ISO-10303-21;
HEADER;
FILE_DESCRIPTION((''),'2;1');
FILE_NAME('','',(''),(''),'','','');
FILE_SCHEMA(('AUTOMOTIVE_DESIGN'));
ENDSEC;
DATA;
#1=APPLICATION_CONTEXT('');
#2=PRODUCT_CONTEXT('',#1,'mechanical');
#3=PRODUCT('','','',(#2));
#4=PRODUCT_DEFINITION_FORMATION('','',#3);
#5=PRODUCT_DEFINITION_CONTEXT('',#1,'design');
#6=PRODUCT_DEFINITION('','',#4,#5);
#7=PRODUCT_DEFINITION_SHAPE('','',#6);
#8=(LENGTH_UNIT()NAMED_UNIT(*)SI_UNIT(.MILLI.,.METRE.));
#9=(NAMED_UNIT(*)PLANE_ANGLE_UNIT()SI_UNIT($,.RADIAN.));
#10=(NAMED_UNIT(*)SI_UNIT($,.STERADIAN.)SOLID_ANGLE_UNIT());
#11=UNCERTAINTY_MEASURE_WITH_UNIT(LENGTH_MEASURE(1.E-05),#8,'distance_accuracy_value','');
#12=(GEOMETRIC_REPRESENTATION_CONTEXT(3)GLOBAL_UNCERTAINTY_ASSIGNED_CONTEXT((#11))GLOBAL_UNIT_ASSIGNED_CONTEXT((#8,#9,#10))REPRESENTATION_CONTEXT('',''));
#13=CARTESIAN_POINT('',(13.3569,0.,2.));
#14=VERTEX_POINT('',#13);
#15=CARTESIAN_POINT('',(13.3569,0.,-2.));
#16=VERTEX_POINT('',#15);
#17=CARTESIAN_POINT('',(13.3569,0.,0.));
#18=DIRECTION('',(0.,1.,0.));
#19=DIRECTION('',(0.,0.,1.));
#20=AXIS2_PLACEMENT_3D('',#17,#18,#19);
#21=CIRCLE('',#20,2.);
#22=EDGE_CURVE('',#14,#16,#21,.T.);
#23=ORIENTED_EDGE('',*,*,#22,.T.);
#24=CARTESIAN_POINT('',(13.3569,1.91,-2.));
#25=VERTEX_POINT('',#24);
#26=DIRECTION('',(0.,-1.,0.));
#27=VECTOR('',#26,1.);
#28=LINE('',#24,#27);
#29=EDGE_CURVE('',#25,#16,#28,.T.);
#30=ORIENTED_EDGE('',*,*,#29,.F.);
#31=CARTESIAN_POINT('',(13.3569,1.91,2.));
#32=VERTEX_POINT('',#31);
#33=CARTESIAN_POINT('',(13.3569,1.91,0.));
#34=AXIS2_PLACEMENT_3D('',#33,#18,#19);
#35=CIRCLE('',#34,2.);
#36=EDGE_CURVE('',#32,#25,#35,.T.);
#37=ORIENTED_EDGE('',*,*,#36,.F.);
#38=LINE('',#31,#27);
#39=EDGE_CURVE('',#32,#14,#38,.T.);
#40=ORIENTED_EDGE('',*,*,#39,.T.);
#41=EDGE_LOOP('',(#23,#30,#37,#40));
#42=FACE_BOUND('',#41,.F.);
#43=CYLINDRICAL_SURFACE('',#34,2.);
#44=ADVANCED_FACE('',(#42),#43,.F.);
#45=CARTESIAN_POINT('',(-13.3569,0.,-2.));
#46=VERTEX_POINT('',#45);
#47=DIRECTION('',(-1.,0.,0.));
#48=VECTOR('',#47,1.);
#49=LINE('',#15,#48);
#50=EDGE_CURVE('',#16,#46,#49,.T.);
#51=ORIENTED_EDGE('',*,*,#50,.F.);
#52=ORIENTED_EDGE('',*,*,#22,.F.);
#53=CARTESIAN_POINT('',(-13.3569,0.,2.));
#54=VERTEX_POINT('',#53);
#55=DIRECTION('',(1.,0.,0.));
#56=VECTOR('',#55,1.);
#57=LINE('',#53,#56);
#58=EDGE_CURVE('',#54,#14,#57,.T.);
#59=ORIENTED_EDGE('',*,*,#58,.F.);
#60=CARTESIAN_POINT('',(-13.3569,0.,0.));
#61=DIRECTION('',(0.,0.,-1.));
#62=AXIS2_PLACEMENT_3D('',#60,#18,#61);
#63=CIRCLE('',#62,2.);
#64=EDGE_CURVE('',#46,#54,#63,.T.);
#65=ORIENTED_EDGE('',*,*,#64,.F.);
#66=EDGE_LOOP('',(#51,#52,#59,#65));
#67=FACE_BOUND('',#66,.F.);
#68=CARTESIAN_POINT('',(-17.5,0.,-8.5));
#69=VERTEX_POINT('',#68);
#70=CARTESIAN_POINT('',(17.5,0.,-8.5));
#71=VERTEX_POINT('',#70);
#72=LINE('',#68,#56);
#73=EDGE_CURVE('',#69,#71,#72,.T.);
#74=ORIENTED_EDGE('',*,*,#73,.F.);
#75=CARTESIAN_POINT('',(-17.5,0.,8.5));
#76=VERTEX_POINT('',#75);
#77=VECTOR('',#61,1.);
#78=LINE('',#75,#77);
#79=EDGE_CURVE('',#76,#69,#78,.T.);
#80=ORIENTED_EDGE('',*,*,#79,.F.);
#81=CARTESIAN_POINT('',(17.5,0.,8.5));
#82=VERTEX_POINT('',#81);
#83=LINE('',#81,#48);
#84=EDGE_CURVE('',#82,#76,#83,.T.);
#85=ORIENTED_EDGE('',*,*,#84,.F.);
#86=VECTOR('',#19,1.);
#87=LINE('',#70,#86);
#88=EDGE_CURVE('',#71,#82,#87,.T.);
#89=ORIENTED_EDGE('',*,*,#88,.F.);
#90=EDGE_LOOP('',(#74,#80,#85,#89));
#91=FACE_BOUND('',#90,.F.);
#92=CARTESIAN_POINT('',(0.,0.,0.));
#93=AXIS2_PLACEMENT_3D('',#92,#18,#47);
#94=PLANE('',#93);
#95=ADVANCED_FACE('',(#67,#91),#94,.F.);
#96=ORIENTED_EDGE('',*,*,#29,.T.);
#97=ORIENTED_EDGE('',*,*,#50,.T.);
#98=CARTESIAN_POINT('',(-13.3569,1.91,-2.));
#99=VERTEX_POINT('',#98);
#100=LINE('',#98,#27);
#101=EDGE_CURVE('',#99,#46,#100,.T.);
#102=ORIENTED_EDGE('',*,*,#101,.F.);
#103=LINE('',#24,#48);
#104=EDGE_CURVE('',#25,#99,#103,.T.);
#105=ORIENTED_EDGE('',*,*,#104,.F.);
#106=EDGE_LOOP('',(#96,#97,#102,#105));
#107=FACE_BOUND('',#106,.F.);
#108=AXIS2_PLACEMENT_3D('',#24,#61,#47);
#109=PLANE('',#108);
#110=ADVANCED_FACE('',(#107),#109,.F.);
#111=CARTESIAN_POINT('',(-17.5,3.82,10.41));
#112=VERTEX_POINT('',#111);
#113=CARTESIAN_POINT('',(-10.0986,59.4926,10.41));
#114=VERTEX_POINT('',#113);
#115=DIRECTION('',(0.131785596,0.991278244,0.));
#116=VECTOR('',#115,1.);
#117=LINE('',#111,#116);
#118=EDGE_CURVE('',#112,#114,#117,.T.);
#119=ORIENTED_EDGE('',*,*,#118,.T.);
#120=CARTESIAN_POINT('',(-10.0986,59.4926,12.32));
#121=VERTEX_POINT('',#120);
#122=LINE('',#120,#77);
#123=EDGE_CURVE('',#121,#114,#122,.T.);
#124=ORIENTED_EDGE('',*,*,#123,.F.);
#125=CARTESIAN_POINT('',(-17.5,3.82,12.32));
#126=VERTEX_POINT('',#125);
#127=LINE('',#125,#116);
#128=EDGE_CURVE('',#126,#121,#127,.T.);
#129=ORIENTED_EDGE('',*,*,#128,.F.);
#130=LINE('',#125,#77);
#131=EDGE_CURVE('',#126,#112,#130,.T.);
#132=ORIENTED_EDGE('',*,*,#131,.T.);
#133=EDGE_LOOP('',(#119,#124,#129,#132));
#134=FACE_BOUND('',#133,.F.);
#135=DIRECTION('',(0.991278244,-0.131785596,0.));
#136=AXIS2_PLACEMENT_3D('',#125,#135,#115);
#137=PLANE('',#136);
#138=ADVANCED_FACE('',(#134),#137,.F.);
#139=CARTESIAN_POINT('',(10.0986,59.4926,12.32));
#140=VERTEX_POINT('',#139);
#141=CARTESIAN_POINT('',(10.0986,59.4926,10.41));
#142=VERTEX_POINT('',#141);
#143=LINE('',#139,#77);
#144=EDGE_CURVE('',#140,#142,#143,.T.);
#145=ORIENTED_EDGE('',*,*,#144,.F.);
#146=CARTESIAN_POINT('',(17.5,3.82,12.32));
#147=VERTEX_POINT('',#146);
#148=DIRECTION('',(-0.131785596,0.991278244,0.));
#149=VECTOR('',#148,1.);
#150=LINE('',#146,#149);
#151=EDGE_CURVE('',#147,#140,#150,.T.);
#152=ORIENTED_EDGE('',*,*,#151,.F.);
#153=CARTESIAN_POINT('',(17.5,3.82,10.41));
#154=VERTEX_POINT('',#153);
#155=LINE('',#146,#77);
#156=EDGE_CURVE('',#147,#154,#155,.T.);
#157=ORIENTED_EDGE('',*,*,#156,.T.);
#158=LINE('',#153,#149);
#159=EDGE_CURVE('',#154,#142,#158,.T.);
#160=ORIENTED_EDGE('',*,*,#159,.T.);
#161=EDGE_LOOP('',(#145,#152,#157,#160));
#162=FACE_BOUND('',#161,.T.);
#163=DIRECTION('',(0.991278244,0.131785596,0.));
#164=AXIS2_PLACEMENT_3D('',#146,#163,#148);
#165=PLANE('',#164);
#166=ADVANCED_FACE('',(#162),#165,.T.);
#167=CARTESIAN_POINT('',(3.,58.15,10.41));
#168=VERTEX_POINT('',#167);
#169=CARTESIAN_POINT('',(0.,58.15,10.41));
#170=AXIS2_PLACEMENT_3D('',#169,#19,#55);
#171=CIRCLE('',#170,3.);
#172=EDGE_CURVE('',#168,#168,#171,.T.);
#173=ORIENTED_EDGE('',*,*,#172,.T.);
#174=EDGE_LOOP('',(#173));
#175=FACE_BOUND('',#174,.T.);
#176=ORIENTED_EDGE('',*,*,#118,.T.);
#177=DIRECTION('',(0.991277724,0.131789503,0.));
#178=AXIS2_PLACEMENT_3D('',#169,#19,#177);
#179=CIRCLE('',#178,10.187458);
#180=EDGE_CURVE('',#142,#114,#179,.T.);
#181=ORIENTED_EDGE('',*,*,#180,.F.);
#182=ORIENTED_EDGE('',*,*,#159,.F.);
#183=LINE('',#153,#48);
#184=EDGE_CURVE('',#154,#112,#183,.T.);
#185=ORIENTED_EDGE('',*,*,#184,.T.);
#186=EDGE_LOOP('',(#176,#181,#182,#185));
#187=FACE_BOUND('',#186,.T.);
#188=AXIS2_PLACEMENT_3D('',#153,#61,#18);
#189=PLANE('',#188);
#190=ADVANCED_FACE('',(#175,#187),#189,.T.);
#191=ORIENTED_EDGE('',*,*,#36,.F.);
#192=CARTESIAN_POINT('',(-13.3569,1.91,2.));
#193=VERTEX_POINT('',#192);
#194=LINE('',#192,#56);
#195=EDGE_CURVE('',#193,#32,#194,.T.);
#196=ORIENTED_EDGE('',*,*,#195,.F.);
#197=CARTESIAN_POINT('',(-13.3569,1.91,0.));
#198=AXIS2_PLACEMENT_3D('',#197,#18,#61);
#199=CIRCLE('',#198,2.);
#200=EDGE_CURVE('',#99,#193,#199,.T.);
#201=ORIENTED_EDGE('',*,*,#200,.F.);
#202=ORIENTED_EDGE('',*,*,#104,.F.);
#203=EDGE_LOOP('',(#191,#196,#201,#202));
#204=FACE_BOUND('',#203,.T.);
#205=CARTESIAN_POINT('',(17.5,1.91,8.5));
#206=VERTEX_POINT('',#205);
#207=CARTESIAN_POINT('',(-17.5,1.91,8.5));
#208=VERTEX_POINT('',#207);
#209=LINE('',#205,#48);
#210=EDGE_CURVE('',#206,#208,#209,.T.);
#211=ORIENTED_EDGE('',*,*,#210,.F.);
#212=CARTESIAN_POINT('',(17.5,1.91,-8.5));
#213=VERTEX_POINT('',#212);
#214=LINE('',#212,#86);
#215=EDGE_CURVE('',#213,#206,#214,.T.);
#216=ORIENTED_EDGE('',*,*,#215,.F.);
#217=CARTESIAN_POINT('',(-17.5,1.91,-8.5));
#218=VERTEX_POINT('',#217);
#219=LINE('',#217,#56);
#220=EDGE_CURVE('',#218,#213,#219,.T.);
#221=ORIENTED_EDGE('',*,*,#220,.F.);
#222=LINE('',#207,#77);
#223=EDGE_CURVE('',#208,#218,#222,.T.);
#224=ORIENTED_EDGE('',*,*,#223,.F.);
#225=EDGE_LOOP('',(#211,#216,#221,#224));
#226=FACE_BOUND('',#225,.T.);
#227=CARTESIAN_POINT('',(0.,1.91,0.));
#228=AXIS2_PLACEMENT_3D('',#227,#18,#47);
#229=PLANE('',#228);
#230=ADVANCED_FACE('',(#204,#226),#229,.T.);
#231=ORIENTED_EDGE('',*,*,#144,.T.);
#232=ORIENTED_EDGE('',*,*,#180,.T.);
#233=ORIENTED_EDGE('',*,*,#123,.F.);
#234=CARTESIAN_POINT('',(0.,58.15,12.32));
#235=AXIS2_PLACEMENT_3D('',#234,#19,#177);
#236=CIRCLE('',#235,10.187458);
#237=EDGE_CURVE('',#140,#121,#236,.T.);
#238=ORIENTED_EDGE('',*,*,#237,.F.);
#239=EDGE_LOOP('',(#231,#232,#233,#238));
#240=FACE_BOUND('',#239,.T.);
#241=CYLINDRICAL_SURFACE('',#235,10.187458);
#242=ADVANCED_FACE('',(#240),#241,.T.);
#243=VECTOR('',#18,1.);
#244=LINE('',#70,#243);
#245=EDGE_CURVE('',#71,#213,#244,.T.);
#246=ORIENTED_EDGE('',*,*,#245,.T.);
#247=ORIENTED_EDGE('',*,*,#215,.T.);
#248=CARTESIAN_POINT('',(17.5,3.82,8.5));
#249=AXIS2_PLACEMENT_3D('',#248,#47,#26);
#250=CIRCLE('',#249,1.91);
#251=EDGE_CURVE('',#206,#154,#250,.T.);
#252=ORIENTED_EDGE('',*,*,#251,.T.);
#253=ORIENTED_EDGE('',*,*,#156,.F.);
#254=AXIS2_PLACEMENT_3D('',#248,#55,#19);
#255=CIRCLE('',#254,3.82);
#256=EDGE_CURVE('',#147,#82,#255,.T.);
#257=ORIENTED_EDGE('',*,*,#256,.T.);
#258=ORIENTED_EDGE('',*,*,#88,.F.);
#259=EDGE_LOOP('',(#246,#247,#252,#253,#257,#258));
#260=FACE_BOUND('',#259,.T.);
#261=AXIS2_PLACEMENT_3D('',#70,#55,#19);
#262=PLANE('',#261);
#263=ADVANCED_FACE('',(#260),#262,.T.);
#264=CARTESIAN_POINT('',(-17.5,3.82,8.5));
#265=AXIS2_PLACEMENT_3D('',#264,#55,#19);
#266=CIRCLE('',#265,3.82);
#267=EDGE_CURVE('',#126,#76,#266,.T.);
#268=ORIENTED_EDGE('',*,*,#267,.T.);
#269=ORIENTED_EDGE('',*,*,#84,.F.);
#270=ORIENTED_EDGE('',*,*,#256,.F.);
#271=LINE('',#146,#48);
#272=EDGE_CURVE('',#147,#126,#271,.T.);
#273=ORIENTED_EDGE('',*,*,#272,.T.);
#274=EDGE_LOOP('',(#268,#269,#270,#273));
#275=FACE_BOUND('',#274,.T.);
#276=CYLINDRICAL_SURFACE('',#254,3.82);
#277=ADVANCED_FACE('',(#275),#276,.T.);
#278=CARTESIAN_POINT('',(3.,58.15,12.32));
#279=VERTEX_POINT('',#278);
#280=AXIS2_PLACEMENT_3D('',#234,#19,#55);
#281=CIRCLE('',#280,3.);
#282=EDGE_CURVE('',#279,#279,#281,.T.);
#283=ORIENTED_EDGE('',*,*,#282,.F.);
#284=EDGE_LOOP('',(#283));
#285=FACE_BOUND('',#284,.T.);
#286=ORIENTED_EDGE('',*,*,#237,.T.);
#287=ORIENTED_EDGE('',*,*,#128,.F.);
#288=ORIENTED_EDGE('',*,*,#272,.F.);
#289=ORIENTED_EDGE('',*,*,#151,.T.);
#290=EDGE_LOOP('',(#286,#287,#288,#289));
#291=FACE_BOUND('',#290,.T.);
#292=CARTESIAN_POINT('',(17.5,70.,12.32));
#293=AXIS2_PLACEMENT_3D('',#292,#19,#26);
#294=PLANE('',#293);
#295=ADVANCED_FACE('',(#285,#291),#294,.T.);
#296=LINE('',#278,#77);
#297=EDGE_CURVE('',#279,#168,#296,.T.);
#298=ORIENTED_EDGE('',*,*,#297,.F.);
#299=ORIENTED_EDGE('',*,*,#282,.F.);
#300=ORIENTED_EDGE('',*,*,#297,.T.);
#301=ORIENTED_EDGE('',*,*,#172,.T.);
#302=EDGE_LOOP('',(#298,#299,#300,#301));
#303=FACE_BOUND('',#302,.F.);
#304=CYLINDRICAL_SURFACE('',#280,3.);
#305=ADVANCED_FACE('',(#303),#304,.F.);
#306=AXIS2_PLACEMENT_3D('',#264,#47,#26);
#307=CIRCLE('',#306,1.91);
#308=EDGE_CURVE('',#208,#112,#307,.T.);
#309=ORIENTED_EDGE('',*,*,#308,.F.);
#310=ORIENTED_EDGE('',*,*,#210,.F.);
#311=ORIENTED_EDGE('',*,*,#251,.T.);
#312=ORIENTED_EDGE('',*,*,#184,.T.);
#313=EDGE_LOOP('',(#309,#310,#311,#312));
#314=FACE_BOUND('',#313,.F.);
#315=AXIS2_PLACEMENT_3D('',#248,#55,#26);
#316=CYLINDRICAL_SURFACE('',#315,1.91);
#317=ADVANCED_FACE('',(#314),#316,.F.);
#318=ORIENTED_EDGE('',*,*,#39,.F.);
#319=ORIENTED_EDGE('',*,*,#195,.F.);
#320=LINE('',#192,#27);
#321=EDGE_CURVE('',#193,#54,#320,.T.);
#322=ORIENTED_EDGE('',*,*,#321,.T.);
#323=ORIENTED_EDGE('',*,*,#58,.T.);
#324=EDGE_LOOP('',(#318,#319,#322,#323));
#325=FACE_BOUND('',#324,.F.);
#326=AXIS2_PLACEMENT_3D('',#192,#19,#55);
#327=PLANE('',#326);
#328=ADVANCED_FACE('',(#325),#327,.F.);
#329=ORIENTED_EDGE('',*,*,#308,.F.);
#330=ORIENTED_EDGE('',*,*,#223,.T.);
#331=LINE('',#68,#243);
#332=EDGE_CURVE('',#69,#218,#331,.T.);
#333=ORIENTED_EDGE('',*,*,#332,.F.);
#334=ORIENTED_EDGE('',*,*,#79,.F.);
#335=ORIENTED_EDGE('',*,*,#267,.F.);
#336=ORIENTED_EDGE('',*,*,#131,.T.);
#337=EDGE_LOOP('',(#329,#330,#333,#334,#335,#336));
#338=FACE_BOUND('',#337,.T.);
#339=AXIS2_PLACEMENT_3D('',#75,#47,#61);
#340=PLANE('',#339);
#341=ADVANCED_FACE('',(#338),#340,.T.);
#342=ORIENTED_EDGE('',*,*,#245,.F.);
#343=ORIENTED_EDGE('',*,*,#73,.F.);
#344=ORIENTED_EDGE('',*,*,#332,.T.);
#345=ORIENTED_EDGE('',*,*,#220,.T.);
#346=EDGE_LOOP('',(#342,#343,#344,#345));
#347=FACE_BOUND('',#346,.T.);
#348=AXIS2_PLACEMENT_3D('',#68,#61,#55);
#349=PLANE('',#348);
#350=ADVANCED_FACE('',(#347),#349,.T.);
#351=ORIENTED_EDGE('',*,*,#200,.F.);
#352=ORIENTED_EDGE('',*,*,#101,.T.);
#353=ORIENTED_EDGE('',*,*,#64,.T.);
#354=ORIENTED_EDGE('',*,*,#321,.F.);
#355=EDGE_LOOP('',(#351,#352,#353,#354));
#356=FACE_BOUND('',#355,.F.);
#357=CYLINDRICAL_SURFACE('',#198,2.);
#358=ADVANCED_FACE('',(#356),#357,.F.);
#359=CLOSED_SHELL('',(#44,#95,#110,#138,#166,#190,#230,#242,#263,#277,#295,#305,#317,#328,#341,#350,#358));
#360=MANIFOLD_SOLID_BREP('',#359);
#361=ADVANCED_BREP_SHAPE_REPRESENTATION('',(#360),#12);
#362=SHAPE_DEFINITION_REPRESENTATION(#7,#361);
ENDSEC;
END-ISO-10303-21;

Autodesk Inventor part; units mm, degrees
ref_plane "YZ Plane" through (0, 0, 0) normal (1, 0, 0) x (0, 1, 0)
ref_plane "XZ Plane" through (0, 0, 0) normal (0, 1, 0) x (-1, 0, 0)
ref_plane "XY Plane" through (0, 0, 0) normal (0, 0, 1) x (1, 0, 0)
sketch "Boceto1" plane through (0, 0, 0) normal (0, 1, 0) x (-1, 0, 0)
  line L0 (-17.5, 8.5) -> (17.5, 8.5)
  line L1 (17.5, 8.5) -> (17.5, -8.5)
  line L2 (17.5, -8.5) -> (-17.5, -8.5)
  line L3 (-17.5, -8.5) -> (-17.5, 8.5)
  line L4 (-17.5, 8.5) -> (17.5, -8.5) construction
  line L5 (17.5, 8.5) -> (-17.5, -8.5) construction
  point P0 (0, 0)
  dimension "d0" = 35
  dimension "d1" = 17
extrude "Placa1" add sketch "Boceto1" along normal blind 1.91
sketch "Boceto2" plane through (17.5, 3.82, 10.41) normal (0, 0, 1) x (1, 0, 0)
  line L0 (-35, 0) -> (0, 0)
  line L1 (0, 0) -> (0, 66.18)
  line L2 (0, 66.18) -> (-35, 66.18)
  line L3 (-35, 66.18) -> (-35, 0)
edge flange "Pestaña1" height 70 angle 90 thickness 1.91 bend radius 1.91 thickness toward (0, 0, 1) relief tear relief width 1.91 relief depth 0.955 edges at (0, 1.91, 8.5) wall of the first edge with corners at (-17.5, 3.82, 10.41) (17.5, 3.82, 10.41) (17.5, 70, 10.41) (-17.5, 70, 10.41)
bend "Doblez1"
corner "Esquina1"
sketch "Boceto5" plane through (-17.5, 70, 12.32) normal (0, 0, 1) x (1, 0, 0)
  arc A0 (27.5986, -10.5074) -> (7.4014, -10.5074) centre (17.5, -11.85) ccw
  line L0 (0, -66.18) -> (7.4014, -10.5074)
  line L1 (35, -66.18) -> (27.5986, -10.5074)
  line L2 (0, 0) -> (35, 0) projected
  line L3 (0, -66.18) -> (0, 0)
  line L4 (0, 0) -> (35, 0)
  line L5 (35, 0) -> (35, -66.18)
  point P0 (17.5, -70)
  dimension "d21" = 20.375
extrude "Cortar2" cut sketch "Boceto5" against normal blind 1.91
sketch "Boceto6" plane through (-17.5, 3.82, 12.32) normal (0, 0, 1) x (1, 0, 0)
  line L0 (7.4014, 55.6726) -> (0, 0) projected
  line L1 (0, 0) -> (35, 0) projected
  line L2 (35, 0) -> (27.5986, 55.6726) projected
  arc A0 (27.5986, 55.6726) -> (7.4014, 55.6726) centre (17.5, 54.33) ccw projected
  circle A1 centre (17.5, 54.33) radius 3
  point P0 (17.5, -3.82)
  dimension "d26" = 6
extrude "Cortar3" cut sketch "Boceto6" against normal blind 1.91 contours A1
sketch "Boceto7" plane through (0, 1.91, 0) normal (0, 1, 0) x (1, 0, 0)
  line L0 (13.3569, 0) -> (-13.3569, 0) construction
  line L1 (13.3569, 2) -> (-13.3569, 2)
  line L2 (-13.3569, -2) -> (13.3569, -2)
  arc A0 (13.3569, -2) -> (13.3569, 2) centre (13.3569, 0) ccw
  arc A1 (-13.3569, 2) -> (-13.3569, -2) centre (-13.3569, 0) ccw
  point P0 (0, 0)
  dimension "d29" = 4
extrude "Cortar4" cut sketch "Boceto7" against normal blind 1.91
equation "\"d24\" = Grosor"
equation "\"d27\" = Grosor"
equation "\"d30\" = Grosor"
equation "\"d2\" = Grosor"
equation "\"d3\" = Anchura_desahogo_plegado"
equation "\"d4\" = Profundidad_desahogo_plegado"
equation "\"d5\" = Remanente_mínimo"
equation "\"d6\" = Radiodetransición"
equation "\"d9\" = Radio_pliegue"
equation "\"d10\" = Tamaño_destalonado"
equation "\"d11\" = TamañoSeparación"
equation "\"d12\" = Tamaño_de_radio_de_Jacobi"
equation "\"Radio_pliegue\" = Grosor"
equation "\"Anchura_desahogo_plegado\" = Grosor"
equation "\"Profundidad_desahogo_plegado\" = 0.5 * Grosor"
equation "\"Tamaño_destalonado\" = 4 * Grosor"
equation "\"Remanente_mínimo\" = 2 * Grosor"
equation "\"Radiodetransición\" = Radio_pliegue"
equation "\"Tamaño_de_radio_de_Jacobi\" = Radio_pliegue"
equation "\"TamañoSeparación\" = Grosor"
equation "\"Grosor\" = 1.91"
properties part number "soporte_barra" material "Acero AISI 1006 85 LC"
